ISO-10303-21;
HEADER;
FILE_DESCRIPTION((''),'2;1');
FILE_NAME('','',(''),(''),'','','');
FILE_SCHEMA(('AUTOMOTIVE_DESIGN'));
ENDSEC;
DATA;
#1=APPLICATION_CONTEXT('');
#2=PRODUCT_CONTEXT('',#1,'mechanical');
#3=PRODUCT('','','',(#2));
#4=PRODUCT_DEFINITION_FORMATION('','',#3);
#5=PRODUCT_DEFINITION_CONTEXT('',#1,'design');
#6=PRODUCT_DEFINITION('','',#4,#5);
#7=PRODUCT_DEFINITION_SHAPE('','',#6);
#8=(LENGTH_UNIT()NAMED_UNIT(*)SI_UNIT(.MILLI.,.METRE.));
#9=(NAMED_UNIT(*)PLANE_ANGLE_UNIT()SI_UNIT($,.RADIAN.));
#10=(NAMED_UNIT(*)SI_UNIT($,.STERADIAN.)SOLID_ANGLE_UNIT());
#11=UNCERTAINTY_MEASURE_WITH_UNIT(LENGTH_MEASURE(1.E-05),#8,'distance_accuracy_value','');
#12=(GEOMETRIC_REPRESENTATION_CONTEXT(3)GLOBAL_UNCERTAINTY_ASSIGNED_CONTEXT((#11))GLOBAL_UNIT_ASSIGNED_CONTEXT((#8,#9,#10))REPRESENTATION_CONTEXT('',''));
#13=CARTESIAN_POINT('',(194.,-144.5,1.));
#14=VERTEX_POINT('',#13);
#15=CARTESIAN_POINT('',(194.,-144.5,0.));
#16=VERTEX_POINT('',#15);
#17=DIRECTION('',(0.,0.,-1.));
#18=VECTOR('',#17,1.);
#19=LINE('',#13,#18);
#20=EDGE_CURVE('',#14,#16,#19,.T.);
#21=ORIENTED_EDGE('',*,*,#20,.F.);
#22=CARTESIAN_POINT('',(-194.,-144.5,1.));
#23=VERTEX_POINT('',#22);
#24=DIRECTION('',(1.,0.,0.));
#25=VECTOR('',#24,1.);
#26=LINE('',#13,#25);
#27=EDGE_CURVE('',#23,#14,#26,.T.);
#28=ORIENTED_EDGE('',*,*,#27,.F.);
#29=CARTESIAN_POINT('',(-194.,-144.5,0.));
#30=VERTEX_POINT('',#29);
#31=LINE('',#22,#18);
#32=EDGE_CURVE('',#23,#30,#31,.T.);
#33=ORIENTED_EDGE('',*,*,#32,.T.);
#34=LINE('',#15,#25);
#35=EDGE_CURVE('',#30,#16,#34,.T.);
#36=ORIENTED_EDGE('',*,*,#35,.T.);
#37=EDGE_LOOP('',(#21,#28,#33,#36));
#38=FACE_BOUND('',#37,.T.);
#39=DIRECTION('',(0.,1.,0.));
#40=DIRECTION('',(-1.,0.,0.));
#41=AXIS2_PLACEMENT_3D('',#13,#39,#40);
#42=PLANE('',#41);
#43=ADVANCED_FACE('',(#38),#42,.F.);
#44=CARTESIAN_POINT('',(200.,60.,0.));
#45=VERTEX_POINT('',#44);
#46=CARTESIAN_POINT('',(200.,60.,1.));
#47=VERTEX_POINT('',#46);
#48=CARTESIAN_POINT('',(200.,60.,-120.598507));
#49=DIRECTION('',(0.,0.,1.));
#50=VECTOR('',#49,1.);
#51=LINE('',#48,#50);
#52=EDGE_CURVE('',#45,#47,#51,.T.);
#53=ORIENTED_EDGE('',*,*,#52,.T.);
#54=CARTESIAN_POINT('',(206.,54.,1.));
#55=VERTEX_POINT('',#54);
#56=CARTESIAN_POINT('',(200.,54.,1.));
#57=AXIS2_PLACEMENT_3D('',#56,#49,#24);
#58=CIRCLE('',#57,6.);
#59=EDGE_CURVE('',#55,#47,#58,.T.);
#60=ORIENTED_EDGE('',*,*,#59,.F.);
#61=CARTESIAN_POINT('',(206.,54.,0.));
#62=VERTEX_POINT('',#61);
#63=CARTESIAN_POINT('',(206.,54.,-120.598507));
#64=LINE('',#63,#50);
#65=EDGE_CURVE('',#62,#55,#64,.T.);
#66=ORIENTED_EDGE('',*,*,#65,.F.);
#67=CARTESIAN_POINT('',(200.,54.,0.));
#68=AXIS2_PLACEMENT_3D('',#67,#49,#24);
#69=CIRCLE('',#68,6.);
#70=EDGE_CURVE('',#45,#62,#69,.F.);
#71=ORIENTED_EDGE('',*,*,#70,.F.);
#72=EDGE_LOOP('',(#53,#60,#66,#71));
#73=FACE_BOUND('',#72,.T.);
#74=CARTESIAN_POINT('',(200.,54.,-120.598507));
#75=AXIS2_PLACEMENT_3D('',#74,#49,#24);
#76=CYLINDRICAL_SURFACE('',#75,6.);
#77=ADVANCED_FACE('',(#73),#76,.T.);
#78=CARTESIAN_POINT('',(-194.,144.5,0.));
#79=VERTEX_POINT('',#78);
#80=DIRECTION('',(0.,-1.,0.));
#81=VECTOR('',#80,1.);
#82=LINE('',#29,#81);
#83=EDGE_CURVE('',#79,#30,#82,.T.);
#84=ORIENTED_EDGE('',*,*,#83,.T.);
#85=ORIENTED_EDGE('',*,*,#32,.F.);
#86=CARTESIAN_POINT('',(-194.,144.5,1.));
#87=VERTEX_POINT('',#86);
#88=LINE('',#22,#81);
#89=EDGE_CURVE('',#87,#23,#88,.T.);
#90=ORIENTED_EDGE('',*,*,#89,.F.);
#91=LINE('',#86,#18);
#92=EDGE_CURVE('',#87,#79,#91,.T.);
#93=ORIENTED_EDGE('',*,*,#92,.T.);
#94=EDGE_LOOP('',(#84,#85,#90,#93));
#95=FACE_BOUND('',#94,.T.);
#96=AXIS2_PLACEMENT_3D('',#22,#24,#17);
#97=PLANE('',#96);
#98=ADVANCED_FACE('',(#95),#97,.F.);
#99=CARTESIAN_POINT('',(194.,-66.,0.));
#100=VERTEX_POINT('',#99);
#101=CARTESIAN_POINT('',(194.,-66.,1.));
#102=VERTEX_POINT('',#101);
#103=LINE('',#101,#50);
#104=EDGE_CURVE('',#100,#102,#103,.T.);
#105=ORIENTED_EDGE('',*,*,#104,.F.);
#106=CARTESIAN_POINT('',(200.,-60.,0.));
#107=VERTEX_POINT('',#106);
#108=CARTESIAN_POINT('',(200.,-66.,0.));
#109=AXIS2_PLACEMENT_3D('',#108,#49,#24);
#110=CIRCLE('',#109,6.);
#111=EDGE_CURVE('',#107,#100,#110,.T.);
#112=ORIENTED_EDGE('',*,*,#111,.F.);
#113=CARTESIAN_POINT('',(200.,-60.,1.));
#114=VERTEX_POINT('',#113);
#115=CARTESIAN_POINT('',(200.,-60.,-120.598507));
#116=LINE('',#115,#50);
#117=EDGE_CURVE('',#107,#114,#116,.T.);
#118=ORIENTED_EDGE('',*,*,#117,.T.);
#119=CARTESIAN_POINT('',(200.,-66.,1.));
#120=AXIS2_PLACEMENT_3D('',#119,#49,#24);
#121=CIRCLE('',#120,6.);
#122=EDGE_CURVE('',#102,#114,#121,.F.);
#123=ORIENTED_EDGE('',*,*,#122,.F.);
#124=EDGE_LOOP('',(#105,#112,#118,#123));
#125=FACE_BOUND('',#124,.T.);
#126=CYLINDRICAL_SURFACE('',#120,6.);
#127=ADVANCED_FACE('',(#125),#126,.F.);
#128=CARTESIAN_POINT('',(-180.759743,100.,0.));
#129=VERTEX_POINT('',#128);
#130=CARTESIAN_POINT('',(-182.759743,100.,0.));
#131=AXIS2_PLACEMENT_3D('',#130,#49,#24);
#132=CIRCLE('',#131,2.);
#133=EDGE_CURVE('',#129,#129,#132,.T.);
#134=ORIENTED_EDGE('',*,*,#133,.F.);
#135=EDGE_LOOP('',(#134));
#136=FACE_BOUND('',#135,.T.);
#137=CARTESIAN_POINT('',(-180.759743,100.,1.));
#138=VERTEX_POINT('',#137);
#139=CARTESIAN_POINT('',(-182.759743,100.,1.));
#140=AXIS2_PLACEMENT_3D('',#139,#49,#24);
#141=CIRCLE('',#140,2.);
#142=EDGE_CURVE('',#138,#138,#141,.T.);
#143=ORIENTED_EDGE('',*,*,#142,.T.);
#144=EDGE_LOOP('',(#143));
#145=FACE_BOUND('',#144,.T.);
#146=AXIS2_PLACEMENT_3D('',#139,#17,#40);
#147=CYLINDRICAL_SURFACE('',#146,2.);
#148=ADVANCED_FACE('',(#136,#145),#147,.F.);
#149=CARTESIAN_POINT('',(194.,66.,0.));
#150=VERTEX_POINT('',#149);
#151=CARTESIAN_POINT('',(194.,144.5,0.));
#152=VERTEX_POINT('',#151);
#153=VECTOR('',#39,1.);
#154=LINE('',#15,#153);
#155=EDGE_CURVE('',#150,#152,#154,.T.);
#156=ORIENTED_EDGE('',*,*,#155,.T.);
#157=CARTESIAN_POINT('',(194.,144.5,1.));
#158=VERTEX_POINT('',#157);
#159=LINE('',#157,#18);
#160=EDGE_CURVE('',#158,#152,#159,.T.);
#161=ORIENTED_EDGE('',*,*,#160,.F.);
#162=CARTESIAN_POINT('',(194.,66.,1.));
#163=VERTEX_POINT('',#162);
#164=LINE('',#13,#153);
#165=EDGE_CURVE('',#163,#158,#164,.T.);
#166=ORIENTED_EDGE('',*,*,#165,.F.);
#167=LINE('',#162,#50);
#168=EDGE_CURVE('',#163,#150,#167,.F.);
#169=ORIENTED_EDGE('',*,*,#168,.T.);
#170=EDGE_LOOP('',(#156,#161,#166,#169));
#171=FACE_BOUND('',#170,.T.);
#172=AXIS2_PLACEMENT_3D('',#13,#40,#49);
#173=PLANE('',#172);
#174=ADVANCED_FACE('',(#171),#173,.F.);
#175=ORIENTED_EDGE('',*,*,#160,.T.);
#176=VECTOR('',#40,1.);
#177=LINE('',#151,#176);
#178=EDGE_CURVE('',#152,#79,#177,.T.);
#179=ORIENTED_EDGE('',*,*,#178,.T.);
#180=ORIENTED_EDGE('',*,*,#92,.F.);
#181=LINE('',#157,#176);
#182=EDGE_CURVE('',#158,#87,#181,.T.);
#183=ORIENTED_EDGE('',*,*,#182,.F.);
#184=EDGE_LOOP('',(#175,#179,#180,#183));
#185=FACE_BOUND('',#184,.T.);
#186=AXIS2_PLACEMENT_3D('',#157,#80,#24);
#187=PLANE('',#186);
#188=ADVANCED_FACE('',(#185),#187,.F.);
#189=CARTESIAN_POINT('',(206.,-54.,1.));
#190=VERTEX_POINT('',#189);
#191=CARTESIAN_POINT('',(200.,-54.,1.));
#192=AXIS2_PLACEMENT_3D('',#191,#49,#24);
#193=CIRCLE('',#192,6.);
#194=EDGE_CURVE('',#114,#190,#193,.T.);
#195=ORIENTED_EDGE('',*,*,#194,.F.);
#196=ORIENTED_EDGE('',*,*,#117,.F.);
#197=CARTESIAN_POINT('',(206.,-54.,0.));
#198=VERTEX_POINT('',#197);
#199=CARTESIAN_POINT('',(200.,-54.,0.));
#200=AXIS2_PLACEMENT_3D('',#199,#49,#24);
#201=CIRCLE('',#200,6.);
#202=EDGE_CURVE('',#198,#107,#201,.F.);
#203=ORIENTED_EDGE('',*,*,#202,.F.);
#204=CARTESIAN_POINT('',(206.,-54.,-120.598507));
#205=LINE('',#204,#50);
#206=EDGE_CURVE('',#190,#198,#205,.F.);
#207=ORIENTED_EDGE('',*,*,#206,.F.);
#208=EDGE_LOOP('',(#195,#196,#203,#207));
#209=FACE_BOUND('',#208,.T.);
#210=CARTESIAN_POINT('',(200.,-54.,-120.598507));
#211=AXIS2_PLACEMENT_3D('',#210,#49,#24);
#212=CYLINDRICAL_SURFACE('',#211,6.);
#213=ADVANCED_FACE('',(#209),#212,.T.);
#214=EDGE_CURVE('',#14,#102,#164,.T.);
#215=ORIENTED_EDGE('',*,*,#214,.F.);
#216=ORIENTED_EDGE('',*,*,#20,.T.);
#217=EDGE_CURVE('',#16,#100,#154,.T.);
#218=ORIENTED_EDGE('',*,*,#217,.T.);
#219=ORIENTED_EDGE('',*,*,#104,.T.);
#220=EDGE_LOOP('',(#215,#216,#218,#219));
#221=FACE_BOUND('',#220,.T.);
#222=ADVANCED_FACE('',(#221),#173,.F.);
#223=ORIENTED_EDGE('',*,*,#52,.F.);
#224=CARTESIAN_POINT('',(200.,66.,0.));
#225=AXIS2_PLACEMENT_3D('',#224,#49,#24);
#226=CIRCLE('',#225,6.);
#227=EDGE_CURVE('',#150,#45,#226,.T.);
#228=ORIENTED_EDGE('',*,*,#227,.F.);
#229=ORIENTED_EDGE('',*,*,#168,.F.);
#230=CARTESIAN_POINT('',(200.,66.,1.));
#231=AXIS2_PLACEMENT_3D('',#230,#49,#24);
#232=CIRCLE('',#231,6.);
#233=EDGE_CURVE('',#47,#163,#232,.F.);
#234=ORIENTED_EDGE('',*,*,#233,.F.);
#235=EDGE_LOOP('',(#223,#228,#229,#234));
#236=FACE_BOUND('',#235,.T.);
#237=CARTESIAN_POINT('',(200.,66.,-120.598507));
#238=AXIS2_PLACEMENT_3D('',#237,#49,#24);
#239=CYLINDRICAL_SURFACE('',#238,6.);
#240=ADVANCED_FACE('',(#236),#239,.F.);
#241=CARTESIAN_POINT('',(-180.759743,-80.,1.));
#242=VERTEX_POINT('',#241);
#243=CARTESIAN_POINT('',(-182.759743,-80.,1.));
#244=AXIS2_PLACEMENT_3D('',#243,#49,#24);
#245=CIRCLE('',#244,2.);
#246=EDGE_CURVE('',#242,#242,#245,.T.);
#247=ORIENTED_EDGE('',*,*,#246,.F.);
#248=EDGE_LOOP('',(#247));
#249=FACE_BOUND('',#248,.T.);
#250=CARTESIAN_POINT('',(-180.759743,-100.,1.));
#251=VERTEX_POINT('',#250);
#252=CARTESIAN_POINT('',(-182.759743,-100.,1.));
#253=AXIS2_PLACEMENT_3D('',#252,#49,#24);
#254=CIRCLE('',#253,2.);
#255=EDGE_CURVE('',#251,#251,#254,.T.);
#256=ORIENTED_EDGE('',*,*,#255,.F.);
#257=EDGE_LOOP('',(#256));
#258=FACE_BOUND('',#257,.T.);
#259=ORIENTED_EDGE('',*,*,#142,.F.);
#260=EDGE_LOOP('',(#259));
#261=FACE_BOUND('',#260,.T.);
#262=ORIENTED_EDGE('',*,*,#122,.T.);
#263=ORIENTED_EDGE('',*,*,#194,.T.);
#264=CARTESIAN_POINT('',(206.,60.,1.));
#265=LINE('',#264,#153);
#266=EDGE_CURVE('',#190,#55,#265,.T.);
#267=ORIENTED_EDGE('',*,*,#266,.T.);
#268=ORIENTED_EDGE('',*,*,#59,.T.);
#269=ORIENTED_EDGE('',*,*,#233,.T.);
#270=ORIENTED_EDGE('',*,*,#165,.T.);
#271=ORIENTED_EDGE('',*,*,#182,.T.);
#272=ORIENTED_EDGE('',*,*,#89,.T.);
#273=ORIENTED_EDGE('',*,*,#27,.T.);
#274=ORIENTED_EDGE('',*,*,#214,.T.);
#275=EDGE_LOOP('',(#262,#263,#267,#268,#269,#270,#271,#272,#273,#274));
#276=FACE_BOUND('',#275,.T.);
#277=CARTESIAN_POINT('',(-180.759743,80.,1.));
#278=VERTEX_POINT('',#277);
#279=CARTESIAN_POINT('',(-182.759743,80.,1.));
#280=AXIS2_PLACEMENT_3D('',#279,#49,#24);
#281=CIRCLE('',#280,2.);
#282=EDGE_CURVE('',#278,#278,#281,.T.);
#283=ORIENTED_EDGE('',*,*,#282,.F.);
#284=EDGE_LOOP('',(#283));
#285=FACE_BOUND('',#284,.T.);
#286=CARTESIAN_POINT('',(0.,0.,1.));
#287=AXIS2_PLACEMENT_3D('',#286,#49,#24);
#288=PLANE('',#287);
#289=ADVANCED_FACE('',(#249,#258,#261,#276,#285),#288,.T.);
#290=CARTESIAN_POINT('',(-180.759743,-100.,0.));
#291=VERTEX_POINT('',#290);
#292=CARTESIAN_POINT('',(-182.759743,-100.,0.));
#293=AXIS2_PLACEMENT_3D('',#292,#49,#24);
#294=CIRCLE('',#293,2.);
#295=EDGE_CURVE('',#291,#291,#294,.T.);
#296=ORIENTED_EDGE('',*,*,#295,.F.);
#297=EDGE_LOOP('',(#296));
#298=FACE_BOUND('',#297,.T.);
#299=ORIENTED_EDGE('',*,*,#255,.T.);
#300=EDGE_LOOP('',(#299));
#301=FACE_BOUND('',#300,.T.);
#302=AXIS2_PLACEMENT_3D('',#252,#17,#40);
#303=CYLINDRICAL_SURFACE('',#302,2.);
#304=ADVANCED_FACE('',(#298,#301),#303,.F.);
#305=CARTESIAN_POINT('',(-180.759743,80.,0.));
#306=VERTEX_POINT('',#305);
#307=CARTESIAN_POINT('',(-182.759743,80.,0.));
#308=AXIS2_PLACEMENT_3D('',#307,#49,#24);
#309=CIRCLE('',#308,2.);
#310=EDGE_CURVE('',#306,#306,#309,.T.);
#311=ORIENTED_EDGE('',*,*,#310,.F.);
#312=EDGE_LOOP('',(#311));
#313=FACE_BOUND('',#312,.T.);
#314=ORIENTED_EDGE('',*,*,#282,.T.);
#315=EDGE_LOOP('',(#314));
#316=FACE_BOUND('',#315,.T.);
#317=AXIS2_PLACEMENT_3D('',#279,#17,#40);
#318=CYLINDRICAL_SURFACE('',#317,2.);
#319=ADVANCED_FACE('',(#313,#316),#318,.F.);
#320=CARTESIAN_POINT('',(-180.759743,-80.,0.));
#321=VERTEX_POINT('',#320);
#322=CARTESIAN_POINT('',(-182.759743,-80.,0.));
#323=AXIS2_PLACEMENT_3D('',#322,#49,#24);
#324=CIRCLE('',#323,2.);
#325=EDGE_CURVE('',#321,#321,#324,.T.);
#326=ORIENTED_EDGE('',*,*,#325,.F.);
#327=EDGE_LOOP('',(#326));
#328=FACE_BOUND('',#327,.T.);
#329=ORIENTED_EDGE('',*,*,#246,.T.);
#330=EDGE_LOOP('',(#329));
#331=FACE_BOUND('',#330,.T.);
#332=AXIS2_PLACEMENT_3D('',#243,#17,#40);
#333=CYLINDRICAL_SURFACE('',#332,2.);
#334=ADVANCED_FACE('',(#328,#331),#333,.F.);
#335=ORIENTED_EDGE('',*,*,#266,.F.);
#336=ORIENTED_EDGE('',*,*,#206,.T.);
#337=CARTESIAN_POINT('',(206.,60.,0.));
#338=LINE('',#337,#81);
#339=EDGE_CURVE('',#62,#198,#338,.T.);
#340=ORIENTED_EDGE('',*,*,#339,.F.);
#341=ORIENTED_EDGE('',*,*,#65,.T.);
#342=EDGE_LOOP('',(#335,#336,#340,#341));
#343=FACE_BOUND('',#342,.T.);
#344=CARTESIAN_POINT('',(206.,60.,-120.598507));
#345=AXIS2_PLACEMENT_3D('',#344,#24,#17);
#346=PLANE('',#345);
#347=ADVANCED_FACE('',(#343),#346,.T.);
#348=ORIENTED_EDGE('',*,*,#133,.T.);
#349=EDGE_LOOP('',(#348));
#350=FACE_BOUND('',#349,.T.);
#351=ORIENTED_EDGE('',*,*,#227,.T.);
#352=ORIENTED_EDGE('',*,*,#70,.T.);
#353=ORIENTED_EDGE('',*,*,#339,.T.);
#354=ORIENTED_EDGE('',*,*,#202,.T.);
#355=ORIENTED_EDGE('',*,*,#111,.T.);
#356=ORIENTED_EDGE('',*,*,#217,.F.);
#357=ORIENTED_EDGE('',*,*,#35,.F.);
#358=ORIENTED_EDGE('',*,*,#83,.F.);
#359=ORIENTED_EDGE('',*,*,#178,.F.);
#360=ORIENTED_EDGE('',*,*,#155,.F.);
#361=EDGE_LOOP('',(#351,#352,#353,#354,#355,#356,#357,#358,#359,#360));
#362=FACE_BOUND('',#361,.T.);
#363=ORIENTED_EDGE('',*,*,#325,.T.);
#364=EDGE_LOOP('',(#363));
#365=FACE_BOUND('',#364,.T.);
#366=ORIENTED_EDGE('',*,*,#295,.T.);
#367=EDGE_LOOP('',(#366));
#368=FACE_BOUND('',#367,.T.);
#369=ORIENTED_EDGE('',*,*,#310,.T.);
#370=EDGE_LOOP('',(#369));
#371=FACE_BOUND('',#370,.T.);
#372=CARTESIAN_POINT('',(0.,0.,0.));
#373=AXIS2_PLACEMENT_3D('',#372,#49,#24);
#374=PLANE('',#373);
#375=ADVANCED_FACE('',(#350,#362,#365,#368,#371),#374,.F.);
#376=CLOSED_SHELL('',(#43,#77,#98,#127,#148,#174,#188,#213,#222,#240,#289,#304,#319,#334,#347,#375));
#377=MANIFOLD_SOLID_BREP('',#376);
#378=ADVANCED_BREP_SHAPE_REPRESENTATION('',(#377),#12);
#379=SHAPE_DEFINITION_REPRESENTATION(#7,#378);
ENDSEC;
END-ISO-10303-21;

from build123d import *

# Parameters (mm, degrees)
SKETCH1_W           = 388
SKETCH1_H           = 289
SKETCH1_R           = 2
BOSS_EXTRUDE1_DEPTH = 1
SKETCH3_W           = 12
SKETCH3_H           = 120
BOSS_EXTRUDE2_DEPTH = 1
FILLET1_R           = 6


with BuildPart() as part:
    # Sketch1 → Boss-Extrude1 (new body)
    with BuildSketch(Plane.XY):
        Rectangle(SKETCH1_W, SKETCH1_H)
        with Locations((-182.759742869, 100.000000002)):
            Circle(SKETCH1_R, mode=Mode.SUBTRACT)
        with Locations((-182.759742868, 80.000000002)):
            Circle(SKETCH1_R, mode=Mode.SUBTRACT)
        with Locations((-182.759742869, -100)):
            Circle(SKETCH1_R, mode=Mode.SUBTRACT)
        with Locations((-182.759742869, -80)):
            Circle(SKETCH1_R, mode=Mode.SUBTRACT)
    extrude(amount=BOSS_EXTRUDE1_DEPTH)

    # Sketch3 → Boss-Extrude2 (add)
    with BuildSketch(Plane.XY.offset(1)):
        with Locations((200, 0)):
            Rectangle(SKETCH3_W, SKETCH3_H)
    extrude(amount=-BOSS_EXTRUDE2_DEPTH)

    # Fillet1
    fillet1_edges = [part.edges().sort_by_distance(p)[0] for p in [
        (194, -60, 0.5),
        (194, 60, 0.5),
    ]]
    fillet(fillet1_edges, radius=FILLET1_R)
    fillet1_2_edges = [part.edges().sort_by_distance(p)[0] for p in [
        (206, -60, 0.5),
        (206, 60, 0.5),
    ]]
    fillet(fillet1_2_edges, radius=FILLET1_R - 0.0001)  # a hair under: the kernel refuses the full size


solid = part.part
